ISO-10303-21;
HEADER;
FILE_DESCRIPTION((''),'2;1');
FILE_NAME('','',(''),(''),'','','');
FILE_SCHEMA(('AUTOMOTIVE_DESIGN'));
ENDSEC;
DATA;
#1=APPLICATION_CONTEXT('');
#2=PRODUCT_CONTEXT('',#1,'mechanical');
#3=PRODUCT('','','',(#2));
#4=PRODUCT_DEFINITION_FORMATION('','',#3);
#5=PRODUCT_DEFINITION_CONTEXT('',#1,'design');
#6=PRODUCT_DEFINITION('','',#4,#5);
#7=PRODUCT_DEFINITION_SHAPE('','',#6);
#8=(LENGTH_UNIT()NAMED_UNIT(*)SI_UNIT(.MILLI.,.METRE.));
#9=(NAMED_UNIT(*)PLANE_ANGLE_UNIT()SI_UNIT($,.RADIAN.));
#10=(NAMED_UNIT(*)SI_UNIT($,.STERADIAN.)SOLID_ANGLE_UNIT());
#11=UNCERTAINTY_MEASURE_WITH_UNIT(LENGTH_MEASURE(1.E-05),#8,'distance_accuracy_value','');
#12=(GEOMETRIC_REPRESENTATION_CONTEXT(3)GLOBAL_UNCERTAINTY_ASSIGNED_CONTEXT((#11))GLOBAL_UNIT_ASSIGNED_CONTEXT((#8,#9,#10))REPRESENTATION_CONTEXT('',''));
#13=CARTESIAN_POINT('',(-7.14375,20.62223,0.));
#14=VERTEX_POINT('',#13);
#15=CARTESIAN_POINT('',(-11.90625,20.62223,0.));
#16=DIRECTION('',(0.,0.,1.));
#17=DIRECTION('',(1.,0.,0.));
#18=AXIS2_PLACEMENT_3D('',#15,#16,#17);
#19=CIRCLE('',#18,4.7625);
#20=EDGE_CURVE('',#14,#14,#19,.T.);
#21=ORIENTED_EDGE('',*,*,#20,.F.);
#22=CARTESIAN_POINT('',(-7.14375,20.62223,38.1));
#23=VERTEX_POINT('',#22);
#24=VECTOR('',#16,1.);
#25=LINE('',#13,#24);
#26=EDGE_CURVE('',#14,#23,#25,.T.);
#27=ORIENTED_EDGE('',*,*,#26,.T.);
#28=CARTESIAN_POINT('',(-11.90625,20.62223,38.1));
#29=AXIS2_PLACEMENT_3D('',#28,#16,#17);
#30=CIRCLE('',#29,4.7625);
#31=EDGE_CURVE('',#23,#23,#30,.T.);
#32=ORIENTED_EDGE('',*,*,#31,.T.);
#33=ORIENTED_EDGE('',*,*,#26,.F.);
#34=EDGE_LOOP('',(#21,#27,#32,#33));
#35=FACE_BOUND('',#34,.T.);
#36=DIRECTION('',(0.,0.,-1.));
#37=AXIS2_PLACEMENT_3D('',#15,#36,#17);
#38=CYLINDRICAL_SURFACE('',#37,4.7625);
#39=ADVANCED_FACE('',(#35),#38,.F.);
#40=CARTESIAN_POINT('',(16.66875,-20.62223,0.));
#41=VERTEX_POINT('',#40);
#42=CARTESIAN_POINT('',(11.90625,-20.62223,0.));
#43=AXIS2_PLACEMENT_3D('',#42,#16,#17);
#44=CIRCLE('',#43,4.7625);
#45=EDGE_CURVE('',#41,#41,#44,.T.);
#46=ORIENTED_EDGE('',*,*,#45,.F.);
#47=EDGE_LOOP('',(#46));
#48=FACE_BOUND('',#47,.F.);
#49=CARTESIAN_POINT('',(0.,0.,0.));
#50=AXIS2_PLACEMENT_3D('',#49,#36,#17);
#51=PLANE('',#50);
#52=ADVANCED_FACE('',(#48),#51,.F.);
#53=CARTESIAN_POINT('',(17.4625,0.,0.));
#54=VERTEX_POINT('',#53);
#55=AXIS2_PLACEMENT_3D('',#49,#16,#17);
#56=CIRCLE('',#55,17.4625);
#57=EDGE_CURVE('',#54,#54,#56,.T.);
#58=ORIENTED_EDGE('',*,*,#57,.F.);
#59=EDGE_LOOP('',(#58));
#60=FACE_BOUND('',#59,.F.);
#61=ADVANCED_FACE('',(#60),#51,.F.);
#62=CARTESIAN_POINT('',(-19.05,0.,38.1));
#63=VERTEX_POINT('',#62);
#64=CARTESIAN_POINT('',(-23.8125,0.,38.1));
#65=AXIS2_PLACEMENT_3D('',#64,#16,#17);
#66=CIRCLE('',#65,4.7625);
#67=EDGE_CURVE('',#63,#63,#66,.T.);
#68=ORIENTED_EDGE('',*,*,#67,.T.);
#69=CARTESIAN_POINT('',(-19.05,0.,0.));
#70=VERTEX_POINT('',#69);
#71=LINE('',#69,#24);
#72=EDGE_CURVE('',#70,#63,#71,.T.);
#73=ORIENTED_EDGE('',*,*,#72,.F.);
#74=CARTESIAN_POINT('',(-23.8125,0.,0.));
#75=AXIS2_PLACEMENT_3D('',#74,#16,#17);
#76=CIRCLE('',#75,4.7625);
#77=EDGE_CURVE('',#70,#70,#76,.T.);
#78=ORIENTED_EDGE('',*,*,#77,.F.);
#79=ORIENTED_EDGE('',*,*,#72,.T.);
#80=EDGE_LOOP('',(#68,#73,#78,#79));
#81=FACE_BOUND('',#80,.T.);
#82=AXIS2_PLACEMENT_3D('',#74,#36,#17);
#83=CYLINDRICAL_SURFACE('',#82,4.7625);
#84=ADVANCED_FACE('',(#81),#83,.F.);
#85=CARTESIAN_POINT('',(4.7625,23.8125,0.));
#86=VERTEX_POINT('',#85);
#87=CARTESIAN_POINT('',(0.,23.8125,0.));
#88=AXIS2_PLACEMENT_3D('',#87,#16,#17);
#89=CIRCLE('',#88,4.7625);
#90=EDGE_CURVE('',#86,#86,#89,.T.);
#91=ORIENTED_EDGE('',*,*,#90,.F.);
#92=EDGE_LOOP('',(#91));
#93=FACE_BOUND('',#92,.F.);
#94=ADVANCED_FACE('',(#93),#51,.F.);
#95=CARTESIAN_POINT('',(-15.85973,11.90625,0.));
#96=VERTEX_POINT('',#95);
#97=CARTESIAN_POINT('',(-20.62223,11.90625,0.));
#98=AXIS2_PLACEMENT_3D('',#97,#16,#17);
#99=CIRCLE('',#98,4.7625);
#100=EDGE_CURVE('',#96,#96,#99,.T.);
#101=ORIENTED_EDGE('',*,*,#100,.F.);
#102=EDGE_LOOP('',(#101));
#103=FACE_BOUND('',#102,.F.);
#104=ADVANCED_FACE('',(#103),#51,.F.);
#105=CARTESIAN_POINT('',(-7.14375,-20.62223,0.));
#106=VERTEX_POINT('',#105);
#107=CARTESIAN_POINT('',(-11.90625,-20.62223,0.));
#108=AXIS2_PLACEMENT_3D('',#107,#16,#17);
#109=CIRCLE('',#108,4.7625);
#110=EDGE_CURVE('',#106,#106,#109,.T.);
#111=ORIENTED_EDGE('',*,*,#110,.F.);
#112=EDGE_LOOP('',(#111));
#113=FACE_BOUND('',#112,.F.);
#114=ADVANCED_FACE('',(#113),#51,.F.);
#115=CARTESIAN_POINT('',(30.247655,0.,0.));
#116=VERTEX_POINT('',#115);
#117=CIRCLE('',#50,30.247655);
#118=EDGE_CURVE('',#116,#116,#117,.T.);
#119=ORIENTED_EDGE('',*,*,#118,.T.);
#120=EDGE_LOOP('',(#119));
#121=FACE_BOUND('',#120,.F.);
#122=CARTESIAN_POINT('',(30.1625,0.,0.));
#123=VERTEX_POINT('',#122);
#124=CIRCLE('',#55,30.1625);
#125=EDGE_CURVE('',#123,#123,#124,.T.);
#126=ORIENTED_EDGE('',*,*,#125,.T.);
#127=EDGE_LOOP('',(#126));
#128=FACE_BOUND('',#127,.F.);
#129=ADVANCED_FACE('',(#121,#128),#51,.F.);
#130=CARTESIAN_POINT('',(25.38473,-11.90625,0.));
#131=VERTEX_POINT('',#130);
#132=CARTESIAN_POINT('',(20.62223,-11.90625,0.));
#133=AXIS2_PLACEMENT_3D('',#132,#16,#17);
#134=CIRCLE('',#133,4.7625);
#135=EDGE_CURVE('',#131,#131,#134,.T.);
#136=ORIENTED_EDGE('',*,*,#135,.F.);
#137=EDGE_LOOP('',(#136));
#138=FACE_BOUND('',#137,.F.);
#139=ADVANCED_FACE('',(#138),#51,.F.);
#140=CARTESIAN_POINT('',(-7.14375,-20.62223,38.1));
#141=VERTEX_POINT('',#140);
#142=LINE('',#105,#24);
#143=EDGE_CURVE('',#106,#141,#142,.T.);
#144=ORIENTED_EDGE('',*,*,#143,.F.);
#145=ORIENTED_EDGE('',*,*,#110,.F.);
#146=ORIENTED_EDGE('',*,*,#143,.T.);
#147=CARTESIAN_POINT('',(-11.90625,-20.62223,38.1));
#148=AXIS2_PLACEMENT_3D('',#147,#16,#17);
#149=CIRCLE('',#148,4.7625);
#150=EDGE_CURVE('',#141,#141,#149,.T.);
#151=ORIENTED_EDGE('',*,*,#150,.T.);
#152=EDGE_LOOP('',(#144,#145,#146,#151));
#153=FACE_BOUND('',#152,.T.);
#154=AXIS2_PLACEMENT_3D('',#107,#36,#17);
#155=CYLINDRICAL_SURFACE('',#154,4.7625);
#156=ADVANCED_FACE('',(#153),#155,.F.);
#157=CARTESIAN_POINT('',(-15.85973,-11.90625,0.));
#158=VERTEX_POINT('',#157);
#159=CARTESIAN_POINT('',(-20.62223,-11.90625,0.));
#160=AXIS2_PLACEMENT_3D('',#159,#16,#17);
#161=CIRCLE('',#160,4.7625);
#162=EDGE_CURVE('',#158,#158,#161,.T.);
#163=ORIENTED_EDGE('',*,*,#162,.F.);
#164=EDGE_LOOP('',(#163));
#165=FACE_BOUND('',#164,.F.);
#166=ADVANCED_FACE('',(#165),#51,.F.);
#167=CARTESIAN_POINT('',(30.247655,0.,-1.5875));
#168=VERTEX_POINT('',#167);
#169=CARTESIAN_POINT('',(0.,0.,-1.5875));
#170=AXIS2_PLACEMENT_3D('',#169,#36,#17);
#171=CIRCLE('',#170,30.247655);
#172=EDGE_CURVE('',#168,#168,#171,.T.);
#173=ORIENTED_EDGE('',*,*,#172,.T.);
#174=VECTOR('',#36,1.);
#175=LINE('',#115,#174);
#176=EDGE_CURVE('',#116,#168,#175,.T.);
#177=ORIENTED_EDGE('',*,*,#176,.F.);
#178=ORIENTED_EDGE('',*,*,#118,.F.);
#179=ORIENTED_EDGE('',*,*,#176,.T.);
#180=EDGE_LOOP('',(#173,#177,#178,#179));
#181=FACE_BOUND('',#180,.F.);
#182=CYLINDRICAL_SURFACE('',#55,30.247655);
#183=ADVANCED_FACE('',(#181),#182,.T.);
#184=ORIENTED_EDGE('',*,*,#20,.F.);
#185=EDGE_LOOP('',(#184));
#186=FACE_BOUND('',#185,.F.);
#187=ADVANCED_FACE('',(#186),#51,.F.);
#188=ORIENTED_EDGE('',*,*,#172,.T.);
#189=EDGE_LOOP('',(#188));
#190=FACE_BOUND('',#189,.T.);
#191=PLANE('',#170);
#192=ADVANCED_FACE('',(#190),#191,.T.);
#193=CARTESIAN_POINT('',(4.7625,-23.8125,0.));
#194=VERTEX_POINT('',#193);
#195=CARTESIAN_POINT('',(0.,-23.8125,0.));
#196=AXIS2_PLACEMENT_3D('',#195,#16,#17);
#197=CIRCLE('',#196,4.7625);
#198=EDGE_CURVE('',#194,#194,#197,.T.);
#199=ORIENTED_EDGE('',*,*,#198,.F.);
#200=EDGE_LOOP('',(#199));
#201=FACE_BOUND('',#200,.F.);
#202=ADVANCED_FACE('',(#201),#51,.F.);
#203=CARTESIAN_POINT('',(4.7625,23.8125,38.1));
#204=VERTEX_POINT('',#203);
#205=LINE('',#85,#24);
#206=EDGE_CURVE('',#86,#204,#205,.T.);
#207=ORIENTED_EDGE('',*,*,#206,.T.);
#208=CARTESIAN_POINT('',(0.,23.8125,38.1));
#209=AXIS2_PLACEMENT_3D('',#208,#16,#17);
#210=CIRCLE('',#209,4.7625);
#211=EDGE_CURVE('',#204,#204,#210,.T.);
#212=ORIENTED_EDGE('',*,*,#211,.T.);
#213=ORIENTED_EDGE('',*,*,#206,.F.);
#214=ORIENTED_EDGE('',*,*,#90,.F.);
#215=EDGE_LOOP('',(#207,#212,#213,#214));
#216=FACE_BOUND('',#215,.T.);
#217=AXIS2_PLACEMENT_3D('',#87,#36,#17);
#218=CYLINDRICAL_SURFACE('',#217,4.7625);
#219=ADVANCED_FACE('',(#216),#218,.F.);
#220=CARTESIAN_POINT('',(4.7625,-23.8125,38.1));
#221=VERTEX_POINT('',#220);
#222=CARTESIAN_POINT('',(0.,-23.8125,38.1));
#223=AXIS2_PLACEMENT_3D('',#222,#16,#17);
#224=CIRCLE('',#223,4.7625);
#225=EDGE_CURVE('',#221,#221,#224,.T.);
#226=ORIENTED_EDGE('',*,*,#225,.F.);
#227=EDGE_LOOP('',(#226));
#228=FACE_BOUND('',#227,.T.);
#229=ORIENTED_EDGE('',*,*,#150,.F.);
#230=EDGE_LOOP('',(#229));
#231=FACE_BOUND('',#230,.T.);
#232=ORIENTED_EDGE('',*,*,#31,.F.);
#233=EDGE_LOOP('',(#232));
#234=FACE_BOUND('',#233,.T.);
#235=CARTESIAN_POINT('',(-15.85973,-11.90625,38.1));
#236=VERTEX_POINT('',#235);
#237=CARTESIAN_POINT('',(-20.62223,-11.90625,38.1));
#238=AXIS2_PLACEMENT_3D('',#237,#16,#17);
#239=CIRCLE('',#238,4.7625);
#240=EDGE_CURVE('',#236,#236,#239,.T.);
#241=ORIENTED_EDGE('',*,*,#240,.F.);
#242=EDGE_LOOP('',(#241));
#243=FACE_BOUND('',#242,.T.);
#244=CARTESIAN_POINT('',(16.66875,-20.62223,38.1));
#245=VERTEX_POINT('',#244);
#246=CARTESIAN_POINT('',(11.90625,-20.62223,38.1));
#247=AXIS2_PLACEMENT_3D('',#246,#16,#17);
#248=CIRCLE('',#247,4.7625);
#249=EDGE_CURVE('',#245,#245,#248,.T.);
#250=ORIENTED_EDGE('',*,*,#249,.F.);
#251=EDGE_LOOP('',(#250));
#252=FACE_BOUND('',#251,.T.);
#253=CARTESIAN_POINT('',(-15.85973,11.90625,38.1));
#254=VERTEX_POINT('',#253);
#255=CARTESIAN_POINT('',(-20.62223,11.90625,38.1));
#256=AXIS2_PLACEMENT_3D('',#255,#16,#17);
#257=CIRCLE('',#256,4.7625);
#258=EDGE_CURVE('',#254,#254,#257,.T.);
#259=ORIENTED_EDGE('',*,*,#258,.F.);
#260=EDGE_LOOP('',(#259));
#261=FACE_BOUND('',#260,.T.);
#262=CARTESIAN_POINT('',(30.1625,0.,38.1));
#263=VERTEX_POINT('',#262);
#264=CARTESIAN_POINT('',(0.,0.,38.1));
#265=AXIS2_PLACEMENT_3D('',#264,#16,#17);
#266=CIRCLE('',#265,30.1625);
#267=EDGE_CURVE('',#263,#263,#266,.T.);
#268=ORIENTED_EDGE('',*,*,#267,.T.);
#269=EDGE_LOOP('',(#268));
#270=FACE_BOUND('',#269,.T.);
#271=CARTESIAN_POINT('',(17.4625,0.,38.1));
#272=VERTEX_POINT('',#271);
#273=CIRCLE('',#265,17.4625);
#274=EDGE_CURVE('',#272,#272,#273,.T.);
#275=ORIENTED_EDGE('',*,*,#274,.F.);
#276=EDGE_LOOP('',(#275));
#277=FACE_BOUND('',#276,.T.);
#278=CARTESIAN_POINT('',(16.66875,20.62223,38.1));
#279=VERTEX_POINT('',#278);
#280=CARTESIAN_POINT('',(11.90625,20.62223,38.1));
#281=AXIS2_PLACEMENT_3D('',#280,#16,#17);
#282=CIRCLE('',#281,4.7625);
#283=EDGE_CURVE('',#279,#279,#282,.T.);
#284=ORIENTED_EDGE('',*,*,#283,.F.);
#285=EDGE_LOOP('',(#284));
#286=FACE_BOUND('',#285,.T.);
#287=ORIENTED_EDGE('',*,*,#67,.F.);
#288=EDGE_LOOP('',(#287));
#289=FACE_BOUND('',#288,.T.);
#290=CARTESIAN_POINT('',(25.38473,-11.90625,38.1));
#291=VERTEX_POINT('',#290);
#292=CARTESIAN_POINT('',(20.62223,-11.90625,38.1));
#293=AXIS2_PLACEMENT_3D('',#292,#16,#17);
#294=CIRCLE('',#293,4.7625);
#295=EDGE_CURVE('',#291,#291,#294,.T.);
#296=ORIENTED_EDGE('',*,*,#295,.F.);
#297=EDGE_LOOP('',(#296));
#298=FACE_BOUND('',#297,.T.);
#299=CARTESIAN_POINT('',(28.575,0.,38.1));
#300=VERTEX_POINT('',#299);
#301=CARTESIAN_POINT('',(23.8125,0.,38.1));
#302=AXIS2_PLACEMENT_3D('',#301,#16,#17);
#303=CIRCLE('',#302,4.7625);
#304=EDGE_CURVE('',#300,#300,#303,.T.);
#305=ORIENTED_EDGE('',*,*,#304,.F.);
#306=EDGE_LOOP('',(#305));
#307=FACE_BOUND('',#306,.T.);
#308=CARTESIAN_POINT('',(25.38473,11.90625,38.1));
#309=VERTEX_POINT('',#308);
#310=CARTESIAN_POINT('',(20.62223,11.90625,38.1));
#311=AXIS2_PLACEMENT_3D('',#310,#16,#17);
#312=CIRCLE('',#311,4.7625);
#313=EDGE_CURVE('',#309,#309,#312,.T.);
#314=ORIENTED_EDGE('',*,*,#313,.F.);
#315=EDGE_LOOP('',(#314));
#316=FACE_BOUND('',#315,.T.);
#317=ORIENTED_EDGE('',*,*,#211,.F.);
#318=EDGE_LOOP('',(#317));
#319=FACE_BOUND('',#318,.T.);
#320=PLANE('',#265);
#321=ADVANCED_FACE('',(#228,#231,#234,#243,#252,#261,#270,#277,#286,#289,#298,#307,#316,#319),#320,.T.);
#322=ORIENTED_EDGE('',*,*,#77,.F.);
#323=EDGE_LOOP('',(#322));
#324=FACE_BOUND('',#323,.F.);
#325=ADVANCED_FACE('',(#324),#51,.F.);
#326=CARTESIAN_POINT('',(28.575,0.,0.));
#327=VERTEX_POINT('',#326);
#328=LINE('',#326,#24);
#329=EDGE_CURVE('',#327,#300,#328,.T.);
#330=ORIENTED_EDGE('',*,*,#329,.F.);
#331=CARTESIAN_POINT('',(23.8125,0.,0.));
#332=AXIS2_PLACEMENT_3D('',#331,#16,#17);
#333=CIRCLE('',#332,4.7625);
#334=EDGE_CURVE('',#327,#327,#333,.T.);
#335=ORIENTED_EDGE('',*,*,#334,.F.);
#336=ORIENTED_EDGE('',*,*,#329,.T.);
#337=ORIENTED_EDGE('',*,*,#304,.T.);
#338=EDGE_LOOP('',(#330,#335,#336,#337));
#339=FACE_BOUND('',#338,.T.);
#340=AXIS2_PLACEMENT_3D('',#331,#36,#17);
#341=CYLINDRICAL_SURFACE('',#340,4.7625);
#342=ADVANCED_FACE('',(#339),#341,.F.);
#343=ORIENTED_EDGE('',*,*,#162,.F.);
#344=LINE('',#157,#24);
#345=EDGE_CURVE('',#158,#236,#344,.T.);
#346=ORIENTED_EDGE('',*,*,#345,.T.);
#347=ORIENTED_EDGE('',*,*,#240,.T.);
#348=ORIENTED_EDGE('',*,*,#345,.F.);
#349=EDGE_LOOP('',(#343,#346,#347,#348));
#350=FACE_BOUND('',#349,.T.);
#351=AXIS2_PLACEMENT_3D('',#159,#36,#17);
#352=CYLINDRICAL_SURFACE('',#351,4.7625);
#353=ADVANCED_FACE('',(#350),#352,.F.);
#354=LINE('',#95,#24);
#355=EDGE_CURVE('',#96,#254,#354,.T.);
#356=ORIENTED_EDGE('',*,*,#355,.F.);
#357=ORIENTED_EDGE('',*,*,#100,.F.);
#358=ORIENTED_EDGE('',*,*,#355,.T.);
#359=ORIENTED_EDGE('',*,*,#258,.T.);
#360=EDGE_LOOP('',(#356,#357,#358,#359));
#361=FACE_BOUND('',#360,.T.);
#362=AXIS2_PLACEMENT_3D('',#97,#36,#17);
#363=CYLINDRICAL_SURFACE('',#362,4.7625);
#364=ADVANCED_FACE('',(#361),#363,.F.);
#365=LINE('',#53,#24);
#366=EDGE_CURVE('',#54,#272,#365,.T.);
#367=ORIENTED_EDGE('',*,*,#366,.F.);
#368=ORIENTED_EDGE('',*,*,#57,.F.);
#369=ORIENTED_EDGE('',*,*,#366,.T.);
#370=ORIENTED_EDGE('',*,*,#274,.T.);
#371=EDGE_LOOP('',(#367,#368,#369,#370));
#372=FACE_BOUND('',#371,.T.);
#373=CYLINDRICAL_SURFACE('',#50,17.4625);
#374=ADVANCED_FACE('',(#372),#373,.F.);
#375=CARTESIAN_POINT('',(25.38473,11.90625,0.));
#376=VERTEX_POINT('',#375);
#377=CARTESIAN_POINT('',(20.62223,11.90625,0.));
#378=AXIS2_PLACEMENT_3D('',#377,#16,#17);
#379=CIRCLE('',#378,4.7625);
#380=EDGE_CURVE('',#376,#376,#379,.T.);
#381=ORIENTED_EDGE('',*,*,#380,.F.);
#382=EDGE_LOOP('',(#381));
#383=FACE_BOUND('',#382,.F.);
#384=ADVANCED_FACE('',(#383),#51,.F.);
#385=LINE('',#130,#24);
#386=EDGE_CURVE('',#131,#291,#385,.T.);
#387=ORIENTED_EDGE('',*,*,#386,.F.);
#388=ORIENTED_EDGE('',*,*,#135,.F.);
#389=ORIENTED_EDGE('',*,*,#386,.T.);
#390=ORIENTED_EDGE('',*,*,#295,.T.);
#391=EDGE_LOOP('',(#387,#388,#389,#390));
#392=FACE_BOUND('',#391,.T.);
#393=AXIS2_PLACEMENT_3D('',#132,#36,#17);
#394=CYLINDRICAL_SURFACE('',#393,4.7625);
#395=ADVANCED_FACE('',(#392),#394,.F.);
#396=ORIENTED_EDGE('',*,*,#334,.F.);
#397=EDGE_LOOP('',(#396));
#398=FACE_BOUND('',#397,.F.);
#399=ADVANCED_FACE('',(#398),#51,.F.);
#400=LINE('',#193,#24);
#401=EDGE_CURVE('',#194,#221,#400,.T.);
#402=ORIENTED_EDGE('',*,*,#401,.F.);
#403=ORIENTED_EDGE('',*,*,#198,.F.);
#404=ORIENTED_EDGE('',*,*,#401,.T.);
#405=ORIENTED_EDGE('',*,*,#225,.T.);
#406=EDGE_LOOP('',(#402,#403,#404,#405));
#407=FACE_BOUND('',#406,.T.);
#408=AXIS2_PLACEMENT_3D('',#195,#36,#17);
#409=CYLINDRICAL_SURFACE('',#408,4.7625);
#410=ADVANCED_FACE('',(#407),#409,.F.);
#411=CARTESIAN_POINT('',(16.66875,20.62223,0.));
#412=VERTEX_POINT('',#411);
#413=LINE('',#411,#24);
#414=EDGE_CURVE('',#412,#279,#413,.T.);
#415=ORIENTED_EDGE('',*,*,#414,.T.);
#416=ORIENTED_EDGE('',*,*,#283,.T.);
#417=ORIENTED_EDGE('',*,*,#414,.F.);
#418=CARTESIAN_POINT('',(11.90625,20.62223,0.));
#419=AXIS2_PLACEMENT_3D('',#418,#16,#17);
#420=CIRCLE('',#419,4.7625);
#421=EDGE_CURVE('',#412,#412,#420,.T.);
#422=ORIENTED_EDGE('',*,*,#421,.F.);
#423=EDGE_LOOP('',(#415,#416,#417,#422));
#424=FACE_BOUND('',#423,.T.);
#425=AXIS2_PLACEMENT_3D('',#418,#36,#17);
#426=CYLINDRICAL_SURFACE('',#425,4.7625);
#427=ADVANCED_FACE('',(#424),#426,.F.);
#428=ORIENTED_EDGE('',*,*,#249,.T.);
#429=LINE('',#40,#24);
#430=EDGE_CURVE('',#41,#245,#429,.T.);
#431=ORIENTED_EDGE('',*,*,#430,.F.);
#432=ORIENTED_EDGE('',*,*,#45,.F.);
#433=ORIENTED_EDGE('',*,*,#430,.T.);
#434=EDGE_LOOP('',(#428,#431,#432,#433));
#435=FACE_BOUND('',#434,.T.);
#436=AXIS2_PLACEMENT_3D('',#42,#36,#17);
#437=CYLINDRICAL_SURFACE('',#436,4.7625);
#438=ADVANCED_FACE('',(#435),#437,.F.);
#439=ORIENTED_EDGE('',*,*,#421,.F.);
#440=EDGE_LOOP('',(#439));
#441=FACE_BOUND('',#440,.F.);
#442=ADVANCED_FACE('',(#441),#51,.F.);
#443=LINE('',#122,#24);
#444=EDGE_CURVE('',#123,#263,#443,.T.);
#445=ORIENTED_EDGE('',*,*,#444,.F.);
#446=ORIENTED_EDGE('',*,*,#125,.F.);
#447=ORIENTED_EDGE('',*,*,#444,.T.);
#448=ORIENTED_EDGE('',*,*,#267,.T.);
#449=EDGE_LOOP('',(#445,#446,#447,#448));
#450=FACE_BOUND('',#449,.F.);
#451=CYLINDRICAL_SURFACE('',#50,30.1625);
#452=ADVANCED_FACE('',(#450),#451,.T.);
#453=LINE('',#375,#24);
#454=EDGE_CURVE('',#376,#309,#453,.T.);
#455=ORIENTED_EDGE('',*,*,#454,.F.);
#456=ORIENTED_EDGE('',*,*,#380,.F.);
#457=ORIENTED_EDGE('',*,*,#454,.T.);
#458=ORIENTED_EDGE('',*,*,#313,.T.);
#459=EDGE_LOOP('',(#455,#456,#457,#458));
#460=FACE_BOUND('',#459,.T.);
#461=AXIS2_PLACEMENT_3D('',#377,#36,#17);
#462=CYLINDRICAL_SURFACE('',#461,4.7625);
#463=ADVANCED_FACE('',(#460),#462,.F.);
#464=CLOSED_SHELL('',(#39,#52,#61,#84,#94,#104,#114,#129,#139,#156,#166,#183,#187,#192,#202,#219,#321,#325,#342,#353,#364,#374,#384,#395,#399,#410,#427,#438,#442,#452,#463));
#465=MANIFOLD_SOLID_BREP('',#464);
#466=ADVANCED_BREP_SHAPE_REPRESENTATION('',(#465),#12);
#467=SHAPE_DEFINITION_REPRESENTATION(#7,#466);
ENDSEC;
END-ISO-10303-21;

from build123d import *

# Parameters (mm, degrees)
F0_R     = 30.1625
F0_R_2   = 4.7625
F0_R_3   = 17.4625
F1_DEPTH = 38.1
F2_R     = 30.2476554836
F3_DEPTH = 1.5875


with BuildPart() as f1:
    # F0 (on Top) → F1 (new body)
    with BuildSketch(Plane.XY):
        Circle(F0_R)
        with Locations((-11.90625, -20.6222299276)):
            Circle(F0_R_2, mode=Mode.SUBTRACT)
        with Locations((-20.6222299276, -11.90625)):
            Circle(F0_R_2, mode=Mode.SUBTRACT)
        with Locations((0, -23.8125)):
            Circle(F0_R_2, mode=Mode.SUBTRACT)
        with Locations((11.90625, -20.6222299276)):
            Circle(F0_R_2, mode=Mode.SUBTRACT)
        with Locations((20.6222299276, -11.90625)):
            Circle(F0_R_2, mode=Mode.SUBTRACT)
        with Locations((-23.8125, 0)):
            Circle(F0_R_2, mode=Mode.SUBTRACT)
        with Locations((-20.6222299276, 11.90625)):
            Circle(F0_R_2, mode=Mode.SUBTRACT)
        with Locations((-11.90625, 20.6222299276)):
            Circle(F0_R_2, mode=Mode.SUBTRACT)
        Circle(F0_R_3, mode=Mode.SUBTRACT)
        with Locations((23.8125, 0)):
            Circle(F0_R_2, mode=Mode.SUBTRACT)
        with Locations((20.6222299276, 11.90625)):
            Circle(F0_R_2, mode=Mode.SUBTRACT)
        with Locations((11.90625, 20.6222299276)):
            Circle(F0_R_2, mode=Mode.SUBTRACT)
        with Locations((0, 23.8125)):
            Circle(F0_R_2, mode=Mode.SUBTRACT)
    extrude(amount=F1_DEPTH)

    # F2 (on face) → F3 (join)
    with BuildSketch(Plane(origin=(0, 0, 0), x_dir=(1, 0, 0), z_dir=(0, 0, -1))):
        Circle(F2_R)
    extrude(amount=F3_DEPTH)


solid = f1.part
